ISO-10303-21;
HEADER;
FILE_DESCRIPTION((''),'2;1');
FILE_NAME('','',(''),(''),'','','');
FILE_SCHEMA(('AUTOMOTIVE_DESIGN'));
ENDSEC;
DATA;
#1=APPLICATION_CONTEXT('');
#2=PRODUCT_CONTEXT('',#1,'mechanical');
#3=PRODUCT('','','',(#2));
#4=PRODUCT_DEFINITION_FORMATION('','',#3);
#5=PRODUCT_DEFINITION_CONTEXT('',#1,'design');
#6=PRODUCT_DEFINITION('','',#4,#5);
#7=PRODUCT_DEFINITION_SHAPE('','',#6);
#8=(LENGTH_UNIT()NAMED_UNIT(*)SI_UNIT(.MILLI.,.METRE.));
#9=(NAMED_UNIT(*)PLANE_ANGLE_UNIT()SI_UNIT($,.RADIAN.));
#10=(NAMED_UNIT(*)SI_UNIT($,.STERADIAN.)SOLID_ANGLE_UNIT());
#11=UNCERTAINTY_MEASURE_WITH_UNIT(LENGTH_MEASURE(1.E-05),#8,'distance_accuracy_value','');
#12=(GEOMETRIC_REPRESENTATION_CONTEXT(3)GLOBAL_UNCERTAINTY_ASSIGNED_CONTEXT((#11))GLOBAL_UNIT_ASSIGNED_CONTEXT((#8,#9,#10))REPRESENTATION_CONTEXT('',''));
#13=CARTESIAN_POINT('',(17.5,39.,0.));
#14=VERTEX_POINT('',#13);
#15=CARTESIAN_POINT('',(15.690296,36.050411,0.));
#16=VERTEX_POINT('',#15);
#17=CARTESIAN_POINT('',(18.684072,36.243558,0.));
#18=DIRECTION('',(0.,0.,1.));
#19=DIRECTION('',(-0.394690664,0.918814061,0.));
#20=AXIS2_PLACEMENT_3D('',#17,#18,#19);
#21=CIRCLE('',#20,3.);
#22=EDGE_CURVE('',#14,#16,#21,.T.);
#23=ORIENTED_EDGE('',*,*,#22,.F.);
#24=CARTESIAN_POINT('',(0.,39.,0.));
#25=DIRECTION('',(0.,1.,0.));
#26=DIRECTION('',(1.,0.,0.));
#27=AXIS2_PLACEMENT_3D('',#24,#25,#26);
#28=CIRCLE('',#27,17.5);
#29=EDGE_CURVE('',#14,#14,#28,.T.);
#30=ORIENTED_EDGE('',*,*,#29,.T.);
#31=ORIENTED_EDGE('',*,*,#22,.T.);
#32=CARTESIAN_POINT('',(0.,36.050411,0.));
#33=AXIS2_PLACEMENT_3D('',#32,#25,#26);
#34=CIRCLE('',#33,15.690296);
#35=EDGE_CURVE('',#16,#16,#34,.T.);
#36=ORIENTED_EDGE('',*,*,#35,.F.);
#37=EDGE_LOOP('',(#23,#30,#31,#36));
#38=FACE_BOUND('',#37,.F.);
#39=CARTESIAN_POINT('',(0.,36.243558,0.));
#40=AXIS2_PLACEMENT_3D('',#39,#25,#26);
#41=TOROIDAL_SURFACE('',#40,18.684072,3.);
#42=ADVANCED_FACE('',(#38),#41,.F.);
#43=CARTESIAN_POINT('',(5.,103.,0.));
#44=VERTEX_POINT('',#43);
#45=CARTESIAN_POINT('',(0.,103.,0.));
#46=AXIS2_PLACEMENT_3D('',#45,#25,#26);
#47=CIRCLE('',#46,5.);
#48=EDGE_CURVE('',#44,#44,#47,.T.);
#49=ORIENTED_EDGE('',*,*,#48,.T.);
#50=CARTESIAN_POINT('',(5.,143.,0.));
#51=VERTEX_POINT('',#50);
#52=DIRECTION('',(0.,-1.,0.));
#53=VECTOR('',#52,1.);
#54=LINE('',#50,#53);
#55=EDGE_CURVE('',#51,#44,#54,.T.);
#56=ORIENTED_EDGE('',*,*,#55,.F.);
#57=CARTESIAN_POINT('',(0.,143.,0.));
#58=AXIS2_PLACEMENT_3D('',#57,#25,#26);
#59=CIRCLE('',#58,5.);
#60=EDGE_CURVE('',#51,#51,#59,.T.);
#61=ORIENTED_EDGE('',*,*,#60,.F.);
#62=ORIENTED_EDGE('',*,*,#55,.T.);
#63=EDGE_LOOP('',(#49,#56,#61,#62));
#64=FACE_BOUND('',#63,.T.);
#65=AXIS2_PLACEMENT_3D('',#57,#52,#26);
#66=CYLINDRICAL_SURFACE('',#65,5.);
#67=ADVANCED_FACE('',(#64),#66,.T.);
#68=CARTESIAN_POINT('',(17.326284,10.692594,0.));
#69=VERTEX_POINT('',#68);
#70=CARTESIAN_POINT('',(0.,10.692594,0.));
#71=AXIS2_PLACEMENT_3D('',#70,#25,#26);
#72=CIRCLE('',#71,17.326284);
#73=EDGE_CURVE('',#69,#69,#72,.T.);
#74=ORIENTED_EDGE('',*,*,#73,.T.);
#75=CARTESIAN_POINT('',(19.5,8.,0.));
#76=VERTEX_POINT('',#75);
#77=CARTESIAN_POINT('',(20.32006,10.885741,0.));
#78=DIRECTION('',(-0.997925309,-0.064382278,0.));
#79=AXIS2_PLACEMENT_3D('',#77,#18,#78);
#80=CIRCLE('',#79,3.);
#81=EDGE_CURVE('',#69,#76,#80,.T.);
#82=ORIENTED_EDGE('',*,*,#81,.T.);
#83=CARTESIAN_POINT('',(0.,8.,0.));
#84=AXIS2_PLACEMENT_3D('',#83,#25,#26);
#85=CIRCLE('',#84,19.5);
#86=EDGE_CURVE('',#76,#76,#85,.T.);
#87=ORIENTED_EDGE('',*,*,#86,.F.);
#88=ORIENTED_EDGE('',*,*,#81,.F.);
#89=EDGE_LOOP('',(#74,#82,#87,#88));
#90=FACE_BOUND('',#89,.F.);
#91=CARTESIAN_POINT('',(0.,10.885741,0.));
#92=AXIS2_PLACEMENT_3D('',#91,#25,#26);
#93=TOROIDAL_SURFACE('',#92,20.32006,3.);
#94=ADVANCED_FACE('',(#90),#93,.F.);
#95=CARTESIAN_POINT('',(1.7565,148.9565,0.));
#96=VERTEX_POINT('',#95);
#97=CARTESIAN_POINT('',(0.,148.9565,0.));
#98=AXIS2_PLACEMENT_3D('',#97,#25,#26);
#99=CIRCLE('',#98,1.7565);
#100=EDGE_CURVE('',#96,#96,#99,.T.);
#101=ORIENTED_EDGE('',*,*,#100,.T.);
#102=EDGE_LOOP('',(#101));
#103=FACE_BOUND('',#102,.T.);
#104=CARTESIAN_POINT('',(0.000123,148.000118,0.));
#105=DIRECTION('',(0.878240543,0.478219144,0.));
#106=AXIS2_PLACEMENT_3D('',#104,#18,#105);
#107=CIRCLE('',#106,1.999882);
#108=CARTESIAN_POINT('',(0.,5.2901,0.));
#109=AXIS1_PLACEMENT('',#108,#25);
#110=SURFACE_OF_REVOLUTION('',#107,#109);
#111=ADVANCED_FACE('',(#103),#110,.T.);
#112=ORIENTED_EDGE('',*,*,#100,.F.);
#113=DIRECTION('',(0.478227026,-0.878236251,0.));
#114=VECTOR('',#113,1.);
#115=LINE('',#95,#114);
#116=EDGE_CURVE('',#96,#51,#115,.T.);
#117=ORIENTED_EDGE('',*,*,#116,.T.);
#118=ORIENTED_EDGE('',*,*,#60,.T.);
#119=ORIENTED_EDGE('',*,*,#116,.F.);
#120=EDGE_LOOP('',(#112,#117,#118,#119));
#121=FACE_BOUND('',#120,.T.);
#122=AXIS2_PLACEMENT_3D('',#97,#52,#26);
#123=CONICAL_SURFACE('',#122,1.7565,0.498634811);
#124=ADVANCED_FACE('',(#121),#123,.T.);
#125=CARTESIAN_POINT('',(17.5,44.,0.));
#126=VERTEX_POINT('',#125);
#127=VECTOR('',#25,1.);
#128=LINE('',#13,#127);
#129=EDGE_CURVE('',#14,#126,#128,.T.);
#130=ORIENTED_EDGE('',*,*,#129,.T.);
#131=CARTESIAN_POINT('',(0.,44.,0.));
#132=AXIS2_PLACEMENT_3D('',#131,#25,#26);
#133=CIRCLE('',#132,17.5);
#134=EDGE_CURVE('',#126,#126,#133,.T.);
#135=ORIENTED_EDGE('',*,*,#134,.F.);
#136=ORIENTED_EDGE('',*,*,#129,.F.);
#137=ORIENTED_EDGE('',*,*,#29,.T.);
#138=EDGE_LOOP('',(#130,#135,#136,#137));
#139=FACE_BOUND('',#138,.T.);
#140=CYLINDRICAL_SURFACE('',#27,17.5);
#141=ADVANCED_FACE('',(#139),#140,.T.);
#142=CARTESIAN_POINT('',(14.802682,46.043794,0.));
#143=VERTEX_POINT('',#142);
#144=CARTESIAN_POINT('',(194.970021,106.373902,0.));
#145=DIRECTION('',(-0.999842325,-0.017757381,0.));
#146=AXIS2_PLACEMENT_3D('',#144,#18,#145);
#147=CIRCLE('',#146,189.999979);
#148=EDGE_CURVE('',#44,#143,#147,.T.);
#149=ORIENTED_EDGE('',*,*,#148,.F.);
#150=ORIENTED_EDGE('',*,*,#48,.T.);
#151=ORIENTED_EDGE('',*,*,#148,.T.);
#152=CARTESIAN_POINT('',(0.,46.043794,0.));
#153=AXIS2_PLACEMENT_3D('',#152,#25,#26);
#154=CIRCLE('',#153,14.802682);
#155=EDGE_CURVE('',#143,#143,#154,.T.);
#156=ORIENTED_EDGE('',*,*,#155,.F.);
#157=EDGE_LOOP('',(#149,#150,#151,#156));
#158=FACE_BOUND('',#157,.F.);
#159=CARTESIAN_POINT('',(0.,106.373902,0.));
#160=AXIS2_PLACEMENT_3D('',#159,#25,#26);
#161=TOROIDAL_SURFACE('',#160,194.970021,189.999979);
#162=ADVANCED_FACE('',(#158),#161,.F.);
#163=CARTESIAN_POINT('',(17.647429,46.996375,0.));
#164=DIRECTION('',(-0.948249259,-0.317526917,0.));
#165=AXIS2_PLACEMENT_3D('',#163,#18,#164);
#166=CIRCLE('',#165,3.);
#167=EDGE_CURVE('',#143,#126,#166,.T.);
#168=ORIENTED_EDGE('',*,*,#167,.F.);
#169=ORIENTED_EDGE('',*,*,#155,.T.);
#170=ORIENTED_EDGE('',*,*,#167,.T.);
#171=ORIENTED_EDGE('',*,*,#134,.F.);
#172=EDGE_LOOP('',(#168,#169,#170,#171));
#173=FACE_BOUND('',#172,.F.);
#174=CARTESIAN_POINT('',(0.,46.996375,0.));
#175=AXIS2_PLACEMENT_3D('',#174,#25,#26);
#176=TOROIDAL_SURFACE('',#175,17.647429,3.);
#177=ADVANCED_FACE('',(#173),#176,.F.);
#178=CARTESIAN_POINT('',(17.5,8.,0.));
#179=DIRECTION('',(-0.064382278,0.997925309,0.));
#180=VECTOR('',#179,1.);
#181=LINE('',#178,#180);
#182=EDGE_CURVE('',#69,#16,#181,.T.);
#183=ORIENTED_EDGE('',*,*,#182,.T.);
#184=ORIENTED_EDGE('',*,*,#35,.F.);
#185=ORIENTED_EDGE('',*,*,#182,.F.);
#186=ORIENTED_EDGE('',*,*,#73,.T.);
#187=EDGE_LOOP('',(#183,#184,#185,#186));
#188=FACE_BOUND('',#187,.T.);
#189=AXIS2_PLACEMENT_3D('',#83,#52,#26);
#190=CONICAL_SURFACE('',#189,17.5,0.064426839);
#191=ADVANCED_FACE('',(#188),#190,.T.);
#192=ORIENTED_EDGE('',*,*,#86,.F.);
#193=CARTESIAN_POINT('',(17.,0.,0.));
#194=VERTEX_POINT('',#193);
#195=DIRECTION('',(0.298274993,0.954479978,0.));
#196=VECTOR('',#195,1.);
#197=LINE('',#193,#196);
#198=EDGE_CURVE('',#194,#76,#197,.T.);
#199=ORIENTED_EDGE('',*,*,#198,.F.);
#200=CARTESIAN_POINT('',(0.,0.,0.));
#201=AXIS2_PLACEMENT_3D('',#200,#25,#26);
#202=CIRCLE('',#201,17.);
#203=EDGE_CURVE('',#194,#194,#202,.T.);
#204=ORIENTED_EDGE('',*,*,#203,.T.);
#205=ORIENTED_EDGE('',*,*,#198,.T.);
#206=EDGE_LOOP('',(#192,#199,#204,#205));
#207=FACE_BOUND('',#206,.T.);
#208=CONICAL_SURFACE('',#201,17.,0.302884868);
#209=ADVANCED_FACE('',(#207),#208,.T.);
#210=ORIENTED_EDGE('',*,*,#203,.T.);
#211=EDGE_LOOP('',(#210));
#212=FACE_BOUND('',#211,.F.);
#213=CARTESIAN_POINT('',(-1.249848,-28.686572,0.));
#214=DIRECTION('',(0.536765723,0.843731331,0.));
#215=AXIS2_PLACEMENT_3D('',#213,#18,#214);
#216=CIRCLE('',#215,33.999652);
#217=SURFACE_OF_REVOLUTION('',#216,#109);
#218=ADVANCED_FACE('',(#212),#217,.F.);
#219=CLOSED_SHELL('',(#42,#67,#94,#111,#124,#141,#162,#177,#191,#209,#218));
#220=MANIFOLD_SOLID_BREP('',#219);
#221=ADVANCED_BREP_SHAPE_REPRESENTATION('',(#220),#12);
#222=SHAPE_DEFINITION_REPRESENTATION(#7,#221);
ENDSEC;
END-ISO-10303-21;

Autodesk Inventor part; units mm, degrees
ref_plane "YZ Plane" through (0, 0, 0) normal (1, 0, 0) x (0, 1, 0)
ref_plane "XZ Plane" through (0, 0, 0) normal (0, 1, 0) x (-1, 0, 0)
ref_plane "XY Plane" through (0, 0, 0) normal (0, 0, 1) x (1, 0, 0)
sketch "草圖2" plane through (0, 0, 0) normal (0, 0, 1) x (1, 0, 0)
  line L0 (0, 0) -> (17, 0)
  line L1 (17, 0) -> (19.5, 8)
  line L2 (19.5, 8) -> (17.5, 8)
  line L3 (17.5, 8) -> (15.5, 39)
  line L4 (15.5, 39) -> (17.5, 39)
  line L5 (17.5, 39) -> (17.5, 44)
  line L6 (17.5, 44) -> (15.5, 44)
  line L7 (0, 0) -> (0, 150)
  line L8 (1.7565, 148.9565) -> (5, 143)
  line L9 (5, 143) -> (5, 103)
  arc A0 (5, 103) -> (15.5, 44) centre (194.97, 106.3739) ccw
  line L10 (0, 0) -> (-19.5, 0) construction
  arc A1 (17, 0) -> (0, 5.2901) centre (-1.25, -28.6869) ccw
  line L11 (0, 150) -> (0, 148)
  arc A2 (1.7565, 148.9565) -> (0, 150) centre (0, 148) ccw
  dimension "d2" = 7
  dimension "d3" = 10
  dimension "d4" = 17
  dimension "d5" = 39
  dimension "d6" = 5
  dimension "d7" = 40
  dimension "d8" = 35
  dimension "d9" = 8
  dimension "d10" = 44
  dimension "d11" = 150
  dimension "d12" = 2
  dimension "d13" = 2
  dimension "d15" = 2
  dimension "d16" = 190
  dimension "d20" = 19.5
  dimension "d21" = 34
  dimension "d22" = 142
  dimension "d23" = 2.7099
  dimension "d28" = 4
  dimension "d29" = 61.43
  dimension "d30" = 140
revolve "迴轉2" add sketch "草圖2" angle 360 about axis through (0, 0, 0) along (0, 1, 0) contours A1 L7 A2 L8 L9 A0 L6 L5 L4 L3 L2 L1
fillet "圓角3" radius 3 3 edges at (-17.5, 8, 0) (-15.5, 44, 0) (-15.5, 39, 0)
properties part number "B"
